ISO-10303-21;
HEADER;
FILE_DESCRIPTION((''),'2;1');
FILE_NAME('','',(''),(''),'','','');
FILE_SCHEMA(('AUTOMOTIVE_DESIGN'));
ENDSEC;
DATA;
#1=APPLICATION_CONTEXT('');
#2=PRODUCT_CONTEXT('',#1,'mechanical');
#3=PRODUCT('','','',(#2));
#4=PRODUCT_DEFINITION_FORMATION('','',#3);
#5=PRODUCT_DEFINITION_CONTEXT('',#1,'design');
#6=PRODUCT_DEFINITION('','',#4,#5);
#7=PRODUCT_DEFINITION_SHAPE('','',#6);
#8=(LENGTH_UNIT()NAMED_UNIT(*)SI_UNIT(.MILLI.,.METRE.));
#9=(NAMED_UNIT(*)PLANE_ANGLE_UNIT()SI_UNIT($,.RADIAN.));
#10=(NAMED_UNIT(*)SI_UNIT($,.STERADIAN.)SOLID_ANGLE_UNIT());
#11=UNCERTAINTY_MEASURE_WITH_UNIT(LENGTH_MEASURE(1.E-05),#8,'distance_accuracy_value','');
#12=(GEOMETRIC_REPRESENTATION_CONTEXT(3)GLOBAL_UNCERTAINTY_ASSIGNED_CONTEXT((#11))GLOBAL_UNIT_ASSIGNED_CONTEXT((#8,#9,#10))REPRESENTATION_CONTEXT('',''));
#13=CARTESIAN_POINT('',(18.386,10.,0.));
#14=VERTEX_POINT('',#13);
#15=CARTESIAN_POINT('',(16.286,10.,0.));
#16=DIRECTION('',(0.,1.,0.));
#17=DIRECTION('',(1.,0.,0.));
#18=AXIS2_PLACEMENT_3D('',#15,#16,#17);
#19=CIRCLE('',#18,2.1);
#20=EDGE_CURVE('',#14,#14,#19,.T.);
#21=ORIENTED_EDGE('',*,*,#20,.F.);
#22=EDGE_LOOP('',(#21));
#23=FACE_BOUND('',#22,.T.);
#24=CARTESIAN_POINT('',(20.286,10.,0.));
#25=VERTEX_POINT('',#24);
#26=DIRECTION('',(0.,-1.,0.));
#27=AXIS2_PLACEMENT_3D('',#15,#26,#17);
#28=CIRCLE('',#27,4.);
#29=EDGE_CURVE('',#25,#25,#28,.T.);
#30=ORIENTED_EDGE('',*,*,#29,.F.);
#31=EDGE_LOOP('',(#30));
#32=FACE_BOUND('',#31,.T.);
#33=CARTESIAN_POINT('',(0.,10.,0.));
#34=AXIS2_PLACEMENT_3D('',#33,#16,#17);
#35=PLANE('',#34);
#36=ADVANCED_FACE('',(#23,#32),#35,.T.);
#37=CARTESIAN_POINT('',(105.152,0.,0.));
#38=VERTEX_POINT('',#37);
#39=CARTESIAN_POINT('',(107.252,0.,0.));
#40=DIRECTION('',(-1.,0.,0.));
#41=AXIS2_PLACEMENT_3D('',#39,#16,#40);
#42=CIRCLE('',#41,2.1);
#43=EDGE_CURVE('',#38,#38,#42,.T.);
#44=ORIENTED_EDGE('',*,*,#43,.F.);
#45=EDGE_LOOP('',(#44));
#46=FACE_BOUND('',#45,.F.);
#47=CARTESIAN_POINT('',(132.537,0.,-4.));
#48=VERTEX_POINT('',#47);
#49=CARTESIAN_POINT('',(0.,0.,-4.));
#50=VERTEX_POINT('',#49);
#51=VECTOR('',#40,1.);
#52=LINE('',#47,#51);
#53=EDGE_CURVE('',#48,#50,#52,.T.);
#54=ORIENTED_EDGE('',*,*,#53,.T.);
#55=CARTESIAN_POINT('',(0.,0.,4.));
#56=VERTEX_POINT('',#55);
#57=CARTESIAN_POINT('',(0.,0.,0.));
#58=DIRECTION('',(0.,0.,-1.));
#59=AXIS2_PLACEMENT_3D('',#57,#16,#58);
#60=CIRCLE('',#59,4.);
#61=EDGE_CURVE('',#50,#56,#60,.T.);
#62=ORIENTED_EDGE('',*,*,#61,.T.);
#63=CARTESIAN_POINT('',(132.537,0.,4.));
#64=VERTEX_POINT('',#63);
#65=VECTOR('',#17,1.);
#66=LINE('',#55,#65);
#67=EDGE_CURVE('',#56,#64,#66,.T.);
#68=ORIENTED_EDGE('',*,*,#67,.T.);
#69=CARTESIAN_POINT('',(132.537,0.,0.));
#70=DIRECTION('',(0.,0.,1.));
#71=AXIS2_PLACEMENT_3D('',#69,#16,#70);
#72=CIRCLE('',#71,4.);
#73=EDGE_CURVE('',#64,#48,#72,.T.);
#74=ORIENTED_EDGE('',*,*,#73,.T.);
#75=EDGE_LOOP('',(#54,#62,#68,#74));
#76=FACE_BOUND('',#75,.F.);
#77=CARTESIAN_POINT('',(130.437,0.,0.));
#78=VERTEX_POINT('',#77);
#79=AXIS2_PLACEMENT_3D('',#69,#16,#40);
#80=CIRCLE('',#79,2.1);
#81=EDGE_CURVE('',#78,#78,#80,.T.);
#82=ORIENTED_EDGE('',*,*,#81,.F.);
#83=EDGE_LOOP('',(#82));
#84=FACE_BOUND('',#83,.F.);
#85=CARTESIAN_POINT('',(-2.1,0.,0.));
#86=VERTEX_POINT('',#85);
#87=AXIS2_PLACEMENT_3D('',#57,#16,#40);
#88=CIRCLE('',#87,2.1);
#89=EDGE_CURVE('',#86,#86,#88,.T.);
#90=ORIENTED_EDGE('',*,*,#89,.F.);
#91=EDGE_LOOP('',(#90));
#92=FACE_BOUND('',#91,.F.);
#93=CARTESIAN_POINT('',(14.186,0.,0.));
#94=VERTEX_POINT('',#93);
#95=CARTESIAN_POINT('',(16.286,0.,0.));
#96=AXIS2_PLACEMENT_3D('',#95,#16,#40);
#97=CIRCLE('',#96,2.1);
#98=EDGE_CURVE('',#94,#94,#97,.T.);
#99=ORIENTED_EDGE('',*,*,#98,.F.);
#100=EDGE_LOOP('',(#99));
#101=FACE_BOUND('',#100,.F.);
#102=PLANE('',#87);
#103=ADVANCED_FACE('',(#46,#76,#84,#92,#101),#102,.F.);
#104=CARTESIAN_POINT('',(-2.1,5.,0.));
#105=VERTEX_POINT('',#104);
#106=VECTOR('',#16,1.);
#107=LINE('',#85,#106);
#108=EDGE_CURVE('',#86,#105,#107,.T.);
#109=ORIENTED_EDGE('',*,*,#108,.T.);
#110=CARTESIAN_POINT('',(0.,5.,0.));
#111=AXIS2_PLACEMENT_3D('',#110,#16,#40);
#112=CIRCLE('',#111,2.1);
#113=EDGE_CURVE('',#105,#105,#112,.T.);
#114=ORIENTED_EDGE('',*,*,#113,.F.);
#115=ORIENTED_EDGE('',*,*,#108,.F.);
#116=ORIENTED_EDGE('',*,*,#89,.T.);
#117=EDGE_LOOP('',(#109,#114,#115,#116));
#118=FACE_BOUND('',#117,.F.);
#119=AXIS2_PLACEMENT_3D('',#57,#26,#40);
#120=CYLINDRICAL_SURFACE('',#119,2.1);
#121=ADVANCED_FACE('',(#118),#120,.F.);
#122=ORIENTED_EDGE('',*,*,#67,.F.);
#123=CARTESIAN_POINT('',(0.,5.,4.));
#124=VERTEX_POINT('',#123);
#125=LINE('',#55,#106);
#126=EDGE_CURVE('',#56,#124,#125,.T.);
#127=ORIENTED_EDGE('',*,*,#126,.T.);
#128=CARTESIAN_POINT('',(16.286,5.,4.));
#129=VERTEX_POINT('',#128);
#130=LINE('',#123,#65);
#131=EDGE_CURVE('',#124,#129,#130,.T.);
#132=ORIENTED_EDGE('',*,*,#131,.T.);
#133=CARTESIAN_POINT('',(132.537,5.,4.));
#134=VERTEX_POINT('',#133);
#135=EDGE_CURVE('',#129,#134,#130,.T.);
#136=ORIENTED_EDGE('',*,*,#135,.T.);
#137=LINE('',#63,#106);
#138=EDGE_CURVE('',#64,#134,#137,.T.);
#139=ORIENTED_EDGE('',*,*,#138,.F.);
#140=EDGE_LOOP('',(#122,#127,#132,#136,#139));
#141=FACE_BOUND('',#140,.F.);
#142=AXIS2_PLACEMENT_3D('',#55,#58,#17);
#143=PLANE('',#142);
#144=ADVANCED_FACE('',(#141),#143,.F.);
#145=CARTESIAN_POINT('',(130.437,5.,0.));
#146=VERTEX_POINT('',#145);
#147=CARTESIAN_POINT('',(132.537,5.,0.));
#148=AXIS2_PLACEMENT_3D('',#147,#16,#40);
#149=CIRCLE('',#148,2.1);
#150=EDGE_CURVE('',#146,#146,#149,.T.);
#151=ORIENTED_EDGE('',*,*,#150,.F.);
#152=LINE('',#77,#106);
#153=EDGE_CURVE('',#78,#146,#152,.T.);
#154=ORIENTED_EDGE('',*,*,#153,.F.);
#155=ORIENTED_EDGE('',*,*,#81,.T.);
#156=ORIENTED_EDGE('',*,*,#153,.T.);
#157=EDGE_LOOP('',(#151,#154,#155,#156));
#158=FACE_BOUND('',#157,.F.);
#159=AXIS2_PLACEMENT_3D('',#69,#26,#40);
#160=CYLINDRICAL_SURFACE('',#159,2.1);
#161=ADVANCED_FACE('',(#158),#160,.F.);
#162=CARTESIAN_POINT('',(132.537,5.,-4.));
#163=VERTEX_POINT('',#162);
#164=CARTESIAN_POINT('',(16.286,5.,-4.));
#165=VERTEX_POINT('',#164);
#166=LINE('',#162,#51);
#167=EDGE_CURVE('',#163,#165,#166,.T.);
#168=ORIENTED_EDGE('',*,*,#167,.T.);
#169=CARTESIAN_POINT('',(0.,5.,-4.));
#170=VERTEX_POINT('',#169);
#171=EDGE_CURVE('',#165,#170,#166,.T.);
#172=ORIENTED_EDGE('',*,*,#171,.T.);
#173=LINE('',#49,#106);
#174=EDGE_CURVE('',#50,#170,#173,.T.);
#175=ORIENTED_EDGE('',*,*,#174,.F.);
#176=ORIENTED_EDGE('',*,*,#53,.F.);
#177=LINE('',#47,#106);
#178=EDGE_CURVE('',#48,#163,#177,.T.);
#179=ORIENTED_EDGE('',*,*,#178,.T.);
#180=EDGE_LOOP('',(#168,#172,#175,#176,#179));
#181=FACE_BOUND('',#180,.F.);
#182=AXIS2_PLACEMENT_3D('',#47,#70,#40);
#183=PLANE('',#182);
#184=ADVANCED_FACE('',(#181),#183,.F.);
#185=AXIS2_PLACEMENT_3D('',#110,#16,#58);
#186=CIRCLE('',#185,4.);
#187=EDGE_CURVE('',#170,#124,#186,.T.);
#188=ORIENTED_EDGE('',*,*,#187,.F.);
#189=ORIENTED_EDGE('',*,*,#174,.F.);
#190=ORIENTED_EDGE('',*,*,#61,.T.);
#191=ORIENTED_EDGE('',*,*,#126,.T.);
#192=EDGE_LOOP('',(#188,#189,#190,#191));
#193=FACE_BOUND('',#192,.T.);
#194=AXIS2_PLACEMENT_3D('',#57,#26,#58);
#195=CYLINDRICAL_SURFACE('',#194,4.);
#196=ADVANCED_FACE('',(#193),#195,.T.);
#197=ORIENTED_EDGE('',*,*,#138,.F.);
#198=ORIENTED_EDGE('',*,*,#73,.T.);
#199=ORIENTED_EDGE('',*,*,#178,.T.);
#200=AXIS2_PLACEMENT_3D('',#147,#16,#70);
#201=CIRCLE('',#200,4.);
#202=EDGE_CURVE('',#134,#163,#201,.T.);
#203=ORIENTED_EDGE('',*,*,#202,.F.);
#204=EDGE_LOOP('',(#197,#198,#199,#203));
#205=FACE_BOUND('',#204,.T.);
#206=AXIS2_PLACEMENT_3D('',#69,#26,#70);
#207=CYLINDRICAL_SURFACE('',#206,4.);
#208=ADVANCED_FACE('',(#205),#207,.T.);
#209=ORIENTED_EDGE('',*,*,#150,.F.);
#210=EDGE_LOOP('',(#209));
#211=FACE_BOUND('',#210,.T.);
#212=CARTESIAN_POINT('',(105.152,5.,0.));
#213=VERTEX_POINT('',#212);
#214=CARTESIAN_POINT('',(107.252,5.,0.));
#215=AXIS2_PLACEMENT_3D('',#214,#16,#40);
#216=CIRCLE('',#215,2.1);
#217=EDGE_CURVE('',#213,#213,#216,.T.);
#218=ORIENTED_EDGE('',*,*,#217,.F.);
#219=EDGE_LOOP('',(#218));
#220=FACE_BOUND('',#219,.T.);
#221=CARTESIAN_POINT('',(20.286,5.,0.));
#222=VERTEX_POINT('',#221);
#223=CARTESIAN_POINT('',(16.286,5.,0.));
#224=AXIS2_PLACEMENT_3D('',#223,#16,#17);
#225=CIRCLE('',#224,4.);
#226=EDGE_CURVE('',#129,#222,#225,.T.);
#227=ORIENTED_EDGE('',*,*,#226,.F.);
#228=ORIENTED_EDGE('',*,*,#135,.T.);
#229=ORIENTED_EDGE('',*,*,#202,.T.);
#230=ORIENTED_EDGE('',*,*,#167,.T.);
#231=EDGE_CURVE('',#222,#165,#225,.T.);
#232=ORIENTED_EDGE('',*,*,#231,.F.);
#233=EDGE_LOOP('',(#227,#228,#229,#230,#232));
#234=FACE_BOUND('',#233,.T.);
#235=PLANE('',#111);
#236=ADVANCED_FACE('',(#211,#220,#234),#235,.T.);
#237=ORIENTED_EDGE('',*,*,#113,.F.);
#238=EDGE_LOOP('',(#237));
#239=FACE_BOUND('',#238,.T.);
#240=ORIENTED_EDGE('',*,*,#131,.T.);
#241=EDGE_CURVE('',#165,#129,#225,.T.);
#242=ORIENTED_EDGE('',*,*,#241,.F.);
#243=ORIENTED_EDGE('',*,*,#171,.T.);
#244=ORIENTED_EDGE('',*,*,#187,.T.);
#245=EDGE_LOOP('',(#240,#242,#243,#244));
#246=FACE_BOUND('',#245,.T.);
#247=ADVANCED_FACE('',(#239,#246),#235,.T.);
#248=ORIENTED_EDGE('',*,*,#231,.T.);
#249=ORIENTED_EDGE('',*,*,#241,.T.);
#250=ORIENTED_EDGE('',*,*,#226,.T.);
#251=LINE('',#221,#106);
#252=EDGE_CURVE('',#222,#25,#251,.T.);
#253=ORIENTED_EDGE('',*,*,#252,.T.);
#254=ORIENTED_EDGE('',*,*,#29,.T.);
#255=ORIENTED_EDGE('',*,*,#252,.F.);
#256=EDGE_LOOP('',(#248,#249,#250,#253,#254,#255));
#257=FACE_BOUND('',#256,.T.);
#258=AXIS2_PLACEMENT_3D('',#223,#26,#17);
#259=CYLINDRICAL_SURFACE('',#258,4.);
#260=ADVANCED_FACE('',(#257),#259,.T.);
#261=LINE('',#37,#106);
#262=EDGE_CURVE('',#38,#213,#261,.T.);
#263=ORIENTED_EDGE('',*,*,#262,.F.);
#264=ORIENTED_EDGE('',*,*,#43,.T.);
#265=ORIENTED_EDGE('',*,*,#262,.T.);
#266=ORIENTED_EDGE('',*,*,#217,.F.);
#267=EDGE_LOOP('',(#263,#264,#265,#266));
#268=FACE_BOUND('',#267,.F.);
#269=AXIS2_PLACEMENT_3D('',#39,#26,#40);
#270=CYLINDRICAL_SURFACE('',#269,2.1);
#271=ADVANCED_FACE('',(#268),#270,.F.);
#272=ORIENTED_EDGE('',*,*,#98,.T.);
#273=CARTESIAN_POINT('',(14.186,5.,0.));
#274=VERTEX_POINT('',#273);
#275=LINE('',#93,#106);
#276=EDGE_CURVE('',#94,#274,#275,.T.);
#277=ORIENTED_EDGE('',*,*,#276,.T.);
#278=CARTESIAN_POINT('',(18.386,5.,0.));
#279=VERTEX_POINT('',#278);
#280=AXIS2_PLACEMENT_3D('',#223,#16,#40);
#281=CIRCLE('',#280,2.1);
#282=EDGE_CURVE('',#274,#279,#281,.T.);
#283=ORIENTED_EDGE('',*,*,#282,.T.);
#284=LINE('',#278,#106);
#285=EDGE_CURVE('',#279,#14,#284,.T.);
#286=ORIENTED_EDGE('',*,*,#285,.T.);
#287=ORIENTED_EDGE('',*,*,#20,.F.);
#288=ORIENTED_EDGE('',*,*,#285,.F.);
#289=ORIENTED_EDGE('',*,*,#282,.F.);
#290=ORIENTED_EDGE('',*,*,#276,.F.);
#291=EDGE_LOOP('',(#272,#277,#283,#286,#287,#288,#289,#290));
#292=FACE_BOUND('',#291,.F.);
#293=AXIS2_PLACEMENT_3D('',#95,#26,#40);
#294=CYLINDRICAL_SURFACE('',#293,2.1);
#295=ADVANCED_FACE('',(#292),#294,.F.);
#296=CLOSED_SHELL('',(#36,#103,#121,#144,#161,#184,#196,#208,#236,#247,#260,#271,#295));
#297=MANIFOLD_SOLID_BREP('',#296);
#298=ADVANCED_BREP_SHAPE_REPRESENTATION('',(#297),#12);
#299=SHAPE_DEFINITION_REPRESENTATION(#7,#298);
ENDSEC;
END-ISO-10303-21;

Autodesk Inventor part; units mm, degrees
ref_plane "YZ Plane" through (0, 0, 0) normal (1, 0, 0) x (0, 1, 0)
ref_plane "XZ Plane" through (0, 0, 0) normal (0, 1, 0) x (-1, 0, 0)
ref_plane "XY Plane" through (0, 0, 0) normal (0, 0, 1) x (1, 0, 0)
sketch "Sketch1" plane through (0, 0, 0) normal (0, 1, 0) x (-1, 0, 0)
  line L0 (0, 0) -> (-132.537, 0) construction
  line L1 (0, 4) -> (-132.537, 4)
  line L2 (-132.537, -4) -> (0, -4)
  arc A0 (0, -4) -> (0, 4) centre (0, 0) ccw
  arc A1 (-132.537, 4) -> (-132.537, -4) centre (-132.537, 0) ccw
  circle A2 centre (0, 0) radius 2.1
  circle A3 centre (-16.286, 0) radius 2.1
  circle A4 centre (-132.537, 0) radius 2.1
  circle A5 centre (-107.252, 0) radius 2.1
  point P0 (-66.2685, 0)
  point P1 (-52.7225, 0)
  dimension "d0" = 132.537
  dimension "d1" = 8
  dimension "d2" = 4.2
  dimension "d8" = 4.2
  dimension "d9" = 16.286
  dimension "d10" = 4.2
  dimension "d28" = 4.2
  dimension "d29" = 107.252
extrude "Extrusion1" add sketch "Sketch1" along normal blind 5
sketch "Sketch4" plane through (0, 5, 0) normal (0, 1, 0) x (1, 0, 0)
  arc A0 (132.537, -4) -> (132.537, 4) centre (132.537, 0) ccw projected
  line L0 (132.537, 4) -> (0, 4) projected
  arc A1 (0, 4) -> (0, -4) centre (0, 0) ccw projected
  line L1 (0, -4) -> (132.537, -4) projected
  circle A2 centre (16.286, 0) radius 2.1 projected
  circle A3 centre (107.252, 0) radius 2.1 projected
  circle A4 centre (132.537, 0) radius 2.1 projected
  circle A5 centre (0, 0) radius 2.1 projected
  circle A6 centre (16.286, 0) radius 4
  dimension "d30" = 8
extrude "Extrusion7" add sketch "Sketch4" along normal blind 5 contours A6
